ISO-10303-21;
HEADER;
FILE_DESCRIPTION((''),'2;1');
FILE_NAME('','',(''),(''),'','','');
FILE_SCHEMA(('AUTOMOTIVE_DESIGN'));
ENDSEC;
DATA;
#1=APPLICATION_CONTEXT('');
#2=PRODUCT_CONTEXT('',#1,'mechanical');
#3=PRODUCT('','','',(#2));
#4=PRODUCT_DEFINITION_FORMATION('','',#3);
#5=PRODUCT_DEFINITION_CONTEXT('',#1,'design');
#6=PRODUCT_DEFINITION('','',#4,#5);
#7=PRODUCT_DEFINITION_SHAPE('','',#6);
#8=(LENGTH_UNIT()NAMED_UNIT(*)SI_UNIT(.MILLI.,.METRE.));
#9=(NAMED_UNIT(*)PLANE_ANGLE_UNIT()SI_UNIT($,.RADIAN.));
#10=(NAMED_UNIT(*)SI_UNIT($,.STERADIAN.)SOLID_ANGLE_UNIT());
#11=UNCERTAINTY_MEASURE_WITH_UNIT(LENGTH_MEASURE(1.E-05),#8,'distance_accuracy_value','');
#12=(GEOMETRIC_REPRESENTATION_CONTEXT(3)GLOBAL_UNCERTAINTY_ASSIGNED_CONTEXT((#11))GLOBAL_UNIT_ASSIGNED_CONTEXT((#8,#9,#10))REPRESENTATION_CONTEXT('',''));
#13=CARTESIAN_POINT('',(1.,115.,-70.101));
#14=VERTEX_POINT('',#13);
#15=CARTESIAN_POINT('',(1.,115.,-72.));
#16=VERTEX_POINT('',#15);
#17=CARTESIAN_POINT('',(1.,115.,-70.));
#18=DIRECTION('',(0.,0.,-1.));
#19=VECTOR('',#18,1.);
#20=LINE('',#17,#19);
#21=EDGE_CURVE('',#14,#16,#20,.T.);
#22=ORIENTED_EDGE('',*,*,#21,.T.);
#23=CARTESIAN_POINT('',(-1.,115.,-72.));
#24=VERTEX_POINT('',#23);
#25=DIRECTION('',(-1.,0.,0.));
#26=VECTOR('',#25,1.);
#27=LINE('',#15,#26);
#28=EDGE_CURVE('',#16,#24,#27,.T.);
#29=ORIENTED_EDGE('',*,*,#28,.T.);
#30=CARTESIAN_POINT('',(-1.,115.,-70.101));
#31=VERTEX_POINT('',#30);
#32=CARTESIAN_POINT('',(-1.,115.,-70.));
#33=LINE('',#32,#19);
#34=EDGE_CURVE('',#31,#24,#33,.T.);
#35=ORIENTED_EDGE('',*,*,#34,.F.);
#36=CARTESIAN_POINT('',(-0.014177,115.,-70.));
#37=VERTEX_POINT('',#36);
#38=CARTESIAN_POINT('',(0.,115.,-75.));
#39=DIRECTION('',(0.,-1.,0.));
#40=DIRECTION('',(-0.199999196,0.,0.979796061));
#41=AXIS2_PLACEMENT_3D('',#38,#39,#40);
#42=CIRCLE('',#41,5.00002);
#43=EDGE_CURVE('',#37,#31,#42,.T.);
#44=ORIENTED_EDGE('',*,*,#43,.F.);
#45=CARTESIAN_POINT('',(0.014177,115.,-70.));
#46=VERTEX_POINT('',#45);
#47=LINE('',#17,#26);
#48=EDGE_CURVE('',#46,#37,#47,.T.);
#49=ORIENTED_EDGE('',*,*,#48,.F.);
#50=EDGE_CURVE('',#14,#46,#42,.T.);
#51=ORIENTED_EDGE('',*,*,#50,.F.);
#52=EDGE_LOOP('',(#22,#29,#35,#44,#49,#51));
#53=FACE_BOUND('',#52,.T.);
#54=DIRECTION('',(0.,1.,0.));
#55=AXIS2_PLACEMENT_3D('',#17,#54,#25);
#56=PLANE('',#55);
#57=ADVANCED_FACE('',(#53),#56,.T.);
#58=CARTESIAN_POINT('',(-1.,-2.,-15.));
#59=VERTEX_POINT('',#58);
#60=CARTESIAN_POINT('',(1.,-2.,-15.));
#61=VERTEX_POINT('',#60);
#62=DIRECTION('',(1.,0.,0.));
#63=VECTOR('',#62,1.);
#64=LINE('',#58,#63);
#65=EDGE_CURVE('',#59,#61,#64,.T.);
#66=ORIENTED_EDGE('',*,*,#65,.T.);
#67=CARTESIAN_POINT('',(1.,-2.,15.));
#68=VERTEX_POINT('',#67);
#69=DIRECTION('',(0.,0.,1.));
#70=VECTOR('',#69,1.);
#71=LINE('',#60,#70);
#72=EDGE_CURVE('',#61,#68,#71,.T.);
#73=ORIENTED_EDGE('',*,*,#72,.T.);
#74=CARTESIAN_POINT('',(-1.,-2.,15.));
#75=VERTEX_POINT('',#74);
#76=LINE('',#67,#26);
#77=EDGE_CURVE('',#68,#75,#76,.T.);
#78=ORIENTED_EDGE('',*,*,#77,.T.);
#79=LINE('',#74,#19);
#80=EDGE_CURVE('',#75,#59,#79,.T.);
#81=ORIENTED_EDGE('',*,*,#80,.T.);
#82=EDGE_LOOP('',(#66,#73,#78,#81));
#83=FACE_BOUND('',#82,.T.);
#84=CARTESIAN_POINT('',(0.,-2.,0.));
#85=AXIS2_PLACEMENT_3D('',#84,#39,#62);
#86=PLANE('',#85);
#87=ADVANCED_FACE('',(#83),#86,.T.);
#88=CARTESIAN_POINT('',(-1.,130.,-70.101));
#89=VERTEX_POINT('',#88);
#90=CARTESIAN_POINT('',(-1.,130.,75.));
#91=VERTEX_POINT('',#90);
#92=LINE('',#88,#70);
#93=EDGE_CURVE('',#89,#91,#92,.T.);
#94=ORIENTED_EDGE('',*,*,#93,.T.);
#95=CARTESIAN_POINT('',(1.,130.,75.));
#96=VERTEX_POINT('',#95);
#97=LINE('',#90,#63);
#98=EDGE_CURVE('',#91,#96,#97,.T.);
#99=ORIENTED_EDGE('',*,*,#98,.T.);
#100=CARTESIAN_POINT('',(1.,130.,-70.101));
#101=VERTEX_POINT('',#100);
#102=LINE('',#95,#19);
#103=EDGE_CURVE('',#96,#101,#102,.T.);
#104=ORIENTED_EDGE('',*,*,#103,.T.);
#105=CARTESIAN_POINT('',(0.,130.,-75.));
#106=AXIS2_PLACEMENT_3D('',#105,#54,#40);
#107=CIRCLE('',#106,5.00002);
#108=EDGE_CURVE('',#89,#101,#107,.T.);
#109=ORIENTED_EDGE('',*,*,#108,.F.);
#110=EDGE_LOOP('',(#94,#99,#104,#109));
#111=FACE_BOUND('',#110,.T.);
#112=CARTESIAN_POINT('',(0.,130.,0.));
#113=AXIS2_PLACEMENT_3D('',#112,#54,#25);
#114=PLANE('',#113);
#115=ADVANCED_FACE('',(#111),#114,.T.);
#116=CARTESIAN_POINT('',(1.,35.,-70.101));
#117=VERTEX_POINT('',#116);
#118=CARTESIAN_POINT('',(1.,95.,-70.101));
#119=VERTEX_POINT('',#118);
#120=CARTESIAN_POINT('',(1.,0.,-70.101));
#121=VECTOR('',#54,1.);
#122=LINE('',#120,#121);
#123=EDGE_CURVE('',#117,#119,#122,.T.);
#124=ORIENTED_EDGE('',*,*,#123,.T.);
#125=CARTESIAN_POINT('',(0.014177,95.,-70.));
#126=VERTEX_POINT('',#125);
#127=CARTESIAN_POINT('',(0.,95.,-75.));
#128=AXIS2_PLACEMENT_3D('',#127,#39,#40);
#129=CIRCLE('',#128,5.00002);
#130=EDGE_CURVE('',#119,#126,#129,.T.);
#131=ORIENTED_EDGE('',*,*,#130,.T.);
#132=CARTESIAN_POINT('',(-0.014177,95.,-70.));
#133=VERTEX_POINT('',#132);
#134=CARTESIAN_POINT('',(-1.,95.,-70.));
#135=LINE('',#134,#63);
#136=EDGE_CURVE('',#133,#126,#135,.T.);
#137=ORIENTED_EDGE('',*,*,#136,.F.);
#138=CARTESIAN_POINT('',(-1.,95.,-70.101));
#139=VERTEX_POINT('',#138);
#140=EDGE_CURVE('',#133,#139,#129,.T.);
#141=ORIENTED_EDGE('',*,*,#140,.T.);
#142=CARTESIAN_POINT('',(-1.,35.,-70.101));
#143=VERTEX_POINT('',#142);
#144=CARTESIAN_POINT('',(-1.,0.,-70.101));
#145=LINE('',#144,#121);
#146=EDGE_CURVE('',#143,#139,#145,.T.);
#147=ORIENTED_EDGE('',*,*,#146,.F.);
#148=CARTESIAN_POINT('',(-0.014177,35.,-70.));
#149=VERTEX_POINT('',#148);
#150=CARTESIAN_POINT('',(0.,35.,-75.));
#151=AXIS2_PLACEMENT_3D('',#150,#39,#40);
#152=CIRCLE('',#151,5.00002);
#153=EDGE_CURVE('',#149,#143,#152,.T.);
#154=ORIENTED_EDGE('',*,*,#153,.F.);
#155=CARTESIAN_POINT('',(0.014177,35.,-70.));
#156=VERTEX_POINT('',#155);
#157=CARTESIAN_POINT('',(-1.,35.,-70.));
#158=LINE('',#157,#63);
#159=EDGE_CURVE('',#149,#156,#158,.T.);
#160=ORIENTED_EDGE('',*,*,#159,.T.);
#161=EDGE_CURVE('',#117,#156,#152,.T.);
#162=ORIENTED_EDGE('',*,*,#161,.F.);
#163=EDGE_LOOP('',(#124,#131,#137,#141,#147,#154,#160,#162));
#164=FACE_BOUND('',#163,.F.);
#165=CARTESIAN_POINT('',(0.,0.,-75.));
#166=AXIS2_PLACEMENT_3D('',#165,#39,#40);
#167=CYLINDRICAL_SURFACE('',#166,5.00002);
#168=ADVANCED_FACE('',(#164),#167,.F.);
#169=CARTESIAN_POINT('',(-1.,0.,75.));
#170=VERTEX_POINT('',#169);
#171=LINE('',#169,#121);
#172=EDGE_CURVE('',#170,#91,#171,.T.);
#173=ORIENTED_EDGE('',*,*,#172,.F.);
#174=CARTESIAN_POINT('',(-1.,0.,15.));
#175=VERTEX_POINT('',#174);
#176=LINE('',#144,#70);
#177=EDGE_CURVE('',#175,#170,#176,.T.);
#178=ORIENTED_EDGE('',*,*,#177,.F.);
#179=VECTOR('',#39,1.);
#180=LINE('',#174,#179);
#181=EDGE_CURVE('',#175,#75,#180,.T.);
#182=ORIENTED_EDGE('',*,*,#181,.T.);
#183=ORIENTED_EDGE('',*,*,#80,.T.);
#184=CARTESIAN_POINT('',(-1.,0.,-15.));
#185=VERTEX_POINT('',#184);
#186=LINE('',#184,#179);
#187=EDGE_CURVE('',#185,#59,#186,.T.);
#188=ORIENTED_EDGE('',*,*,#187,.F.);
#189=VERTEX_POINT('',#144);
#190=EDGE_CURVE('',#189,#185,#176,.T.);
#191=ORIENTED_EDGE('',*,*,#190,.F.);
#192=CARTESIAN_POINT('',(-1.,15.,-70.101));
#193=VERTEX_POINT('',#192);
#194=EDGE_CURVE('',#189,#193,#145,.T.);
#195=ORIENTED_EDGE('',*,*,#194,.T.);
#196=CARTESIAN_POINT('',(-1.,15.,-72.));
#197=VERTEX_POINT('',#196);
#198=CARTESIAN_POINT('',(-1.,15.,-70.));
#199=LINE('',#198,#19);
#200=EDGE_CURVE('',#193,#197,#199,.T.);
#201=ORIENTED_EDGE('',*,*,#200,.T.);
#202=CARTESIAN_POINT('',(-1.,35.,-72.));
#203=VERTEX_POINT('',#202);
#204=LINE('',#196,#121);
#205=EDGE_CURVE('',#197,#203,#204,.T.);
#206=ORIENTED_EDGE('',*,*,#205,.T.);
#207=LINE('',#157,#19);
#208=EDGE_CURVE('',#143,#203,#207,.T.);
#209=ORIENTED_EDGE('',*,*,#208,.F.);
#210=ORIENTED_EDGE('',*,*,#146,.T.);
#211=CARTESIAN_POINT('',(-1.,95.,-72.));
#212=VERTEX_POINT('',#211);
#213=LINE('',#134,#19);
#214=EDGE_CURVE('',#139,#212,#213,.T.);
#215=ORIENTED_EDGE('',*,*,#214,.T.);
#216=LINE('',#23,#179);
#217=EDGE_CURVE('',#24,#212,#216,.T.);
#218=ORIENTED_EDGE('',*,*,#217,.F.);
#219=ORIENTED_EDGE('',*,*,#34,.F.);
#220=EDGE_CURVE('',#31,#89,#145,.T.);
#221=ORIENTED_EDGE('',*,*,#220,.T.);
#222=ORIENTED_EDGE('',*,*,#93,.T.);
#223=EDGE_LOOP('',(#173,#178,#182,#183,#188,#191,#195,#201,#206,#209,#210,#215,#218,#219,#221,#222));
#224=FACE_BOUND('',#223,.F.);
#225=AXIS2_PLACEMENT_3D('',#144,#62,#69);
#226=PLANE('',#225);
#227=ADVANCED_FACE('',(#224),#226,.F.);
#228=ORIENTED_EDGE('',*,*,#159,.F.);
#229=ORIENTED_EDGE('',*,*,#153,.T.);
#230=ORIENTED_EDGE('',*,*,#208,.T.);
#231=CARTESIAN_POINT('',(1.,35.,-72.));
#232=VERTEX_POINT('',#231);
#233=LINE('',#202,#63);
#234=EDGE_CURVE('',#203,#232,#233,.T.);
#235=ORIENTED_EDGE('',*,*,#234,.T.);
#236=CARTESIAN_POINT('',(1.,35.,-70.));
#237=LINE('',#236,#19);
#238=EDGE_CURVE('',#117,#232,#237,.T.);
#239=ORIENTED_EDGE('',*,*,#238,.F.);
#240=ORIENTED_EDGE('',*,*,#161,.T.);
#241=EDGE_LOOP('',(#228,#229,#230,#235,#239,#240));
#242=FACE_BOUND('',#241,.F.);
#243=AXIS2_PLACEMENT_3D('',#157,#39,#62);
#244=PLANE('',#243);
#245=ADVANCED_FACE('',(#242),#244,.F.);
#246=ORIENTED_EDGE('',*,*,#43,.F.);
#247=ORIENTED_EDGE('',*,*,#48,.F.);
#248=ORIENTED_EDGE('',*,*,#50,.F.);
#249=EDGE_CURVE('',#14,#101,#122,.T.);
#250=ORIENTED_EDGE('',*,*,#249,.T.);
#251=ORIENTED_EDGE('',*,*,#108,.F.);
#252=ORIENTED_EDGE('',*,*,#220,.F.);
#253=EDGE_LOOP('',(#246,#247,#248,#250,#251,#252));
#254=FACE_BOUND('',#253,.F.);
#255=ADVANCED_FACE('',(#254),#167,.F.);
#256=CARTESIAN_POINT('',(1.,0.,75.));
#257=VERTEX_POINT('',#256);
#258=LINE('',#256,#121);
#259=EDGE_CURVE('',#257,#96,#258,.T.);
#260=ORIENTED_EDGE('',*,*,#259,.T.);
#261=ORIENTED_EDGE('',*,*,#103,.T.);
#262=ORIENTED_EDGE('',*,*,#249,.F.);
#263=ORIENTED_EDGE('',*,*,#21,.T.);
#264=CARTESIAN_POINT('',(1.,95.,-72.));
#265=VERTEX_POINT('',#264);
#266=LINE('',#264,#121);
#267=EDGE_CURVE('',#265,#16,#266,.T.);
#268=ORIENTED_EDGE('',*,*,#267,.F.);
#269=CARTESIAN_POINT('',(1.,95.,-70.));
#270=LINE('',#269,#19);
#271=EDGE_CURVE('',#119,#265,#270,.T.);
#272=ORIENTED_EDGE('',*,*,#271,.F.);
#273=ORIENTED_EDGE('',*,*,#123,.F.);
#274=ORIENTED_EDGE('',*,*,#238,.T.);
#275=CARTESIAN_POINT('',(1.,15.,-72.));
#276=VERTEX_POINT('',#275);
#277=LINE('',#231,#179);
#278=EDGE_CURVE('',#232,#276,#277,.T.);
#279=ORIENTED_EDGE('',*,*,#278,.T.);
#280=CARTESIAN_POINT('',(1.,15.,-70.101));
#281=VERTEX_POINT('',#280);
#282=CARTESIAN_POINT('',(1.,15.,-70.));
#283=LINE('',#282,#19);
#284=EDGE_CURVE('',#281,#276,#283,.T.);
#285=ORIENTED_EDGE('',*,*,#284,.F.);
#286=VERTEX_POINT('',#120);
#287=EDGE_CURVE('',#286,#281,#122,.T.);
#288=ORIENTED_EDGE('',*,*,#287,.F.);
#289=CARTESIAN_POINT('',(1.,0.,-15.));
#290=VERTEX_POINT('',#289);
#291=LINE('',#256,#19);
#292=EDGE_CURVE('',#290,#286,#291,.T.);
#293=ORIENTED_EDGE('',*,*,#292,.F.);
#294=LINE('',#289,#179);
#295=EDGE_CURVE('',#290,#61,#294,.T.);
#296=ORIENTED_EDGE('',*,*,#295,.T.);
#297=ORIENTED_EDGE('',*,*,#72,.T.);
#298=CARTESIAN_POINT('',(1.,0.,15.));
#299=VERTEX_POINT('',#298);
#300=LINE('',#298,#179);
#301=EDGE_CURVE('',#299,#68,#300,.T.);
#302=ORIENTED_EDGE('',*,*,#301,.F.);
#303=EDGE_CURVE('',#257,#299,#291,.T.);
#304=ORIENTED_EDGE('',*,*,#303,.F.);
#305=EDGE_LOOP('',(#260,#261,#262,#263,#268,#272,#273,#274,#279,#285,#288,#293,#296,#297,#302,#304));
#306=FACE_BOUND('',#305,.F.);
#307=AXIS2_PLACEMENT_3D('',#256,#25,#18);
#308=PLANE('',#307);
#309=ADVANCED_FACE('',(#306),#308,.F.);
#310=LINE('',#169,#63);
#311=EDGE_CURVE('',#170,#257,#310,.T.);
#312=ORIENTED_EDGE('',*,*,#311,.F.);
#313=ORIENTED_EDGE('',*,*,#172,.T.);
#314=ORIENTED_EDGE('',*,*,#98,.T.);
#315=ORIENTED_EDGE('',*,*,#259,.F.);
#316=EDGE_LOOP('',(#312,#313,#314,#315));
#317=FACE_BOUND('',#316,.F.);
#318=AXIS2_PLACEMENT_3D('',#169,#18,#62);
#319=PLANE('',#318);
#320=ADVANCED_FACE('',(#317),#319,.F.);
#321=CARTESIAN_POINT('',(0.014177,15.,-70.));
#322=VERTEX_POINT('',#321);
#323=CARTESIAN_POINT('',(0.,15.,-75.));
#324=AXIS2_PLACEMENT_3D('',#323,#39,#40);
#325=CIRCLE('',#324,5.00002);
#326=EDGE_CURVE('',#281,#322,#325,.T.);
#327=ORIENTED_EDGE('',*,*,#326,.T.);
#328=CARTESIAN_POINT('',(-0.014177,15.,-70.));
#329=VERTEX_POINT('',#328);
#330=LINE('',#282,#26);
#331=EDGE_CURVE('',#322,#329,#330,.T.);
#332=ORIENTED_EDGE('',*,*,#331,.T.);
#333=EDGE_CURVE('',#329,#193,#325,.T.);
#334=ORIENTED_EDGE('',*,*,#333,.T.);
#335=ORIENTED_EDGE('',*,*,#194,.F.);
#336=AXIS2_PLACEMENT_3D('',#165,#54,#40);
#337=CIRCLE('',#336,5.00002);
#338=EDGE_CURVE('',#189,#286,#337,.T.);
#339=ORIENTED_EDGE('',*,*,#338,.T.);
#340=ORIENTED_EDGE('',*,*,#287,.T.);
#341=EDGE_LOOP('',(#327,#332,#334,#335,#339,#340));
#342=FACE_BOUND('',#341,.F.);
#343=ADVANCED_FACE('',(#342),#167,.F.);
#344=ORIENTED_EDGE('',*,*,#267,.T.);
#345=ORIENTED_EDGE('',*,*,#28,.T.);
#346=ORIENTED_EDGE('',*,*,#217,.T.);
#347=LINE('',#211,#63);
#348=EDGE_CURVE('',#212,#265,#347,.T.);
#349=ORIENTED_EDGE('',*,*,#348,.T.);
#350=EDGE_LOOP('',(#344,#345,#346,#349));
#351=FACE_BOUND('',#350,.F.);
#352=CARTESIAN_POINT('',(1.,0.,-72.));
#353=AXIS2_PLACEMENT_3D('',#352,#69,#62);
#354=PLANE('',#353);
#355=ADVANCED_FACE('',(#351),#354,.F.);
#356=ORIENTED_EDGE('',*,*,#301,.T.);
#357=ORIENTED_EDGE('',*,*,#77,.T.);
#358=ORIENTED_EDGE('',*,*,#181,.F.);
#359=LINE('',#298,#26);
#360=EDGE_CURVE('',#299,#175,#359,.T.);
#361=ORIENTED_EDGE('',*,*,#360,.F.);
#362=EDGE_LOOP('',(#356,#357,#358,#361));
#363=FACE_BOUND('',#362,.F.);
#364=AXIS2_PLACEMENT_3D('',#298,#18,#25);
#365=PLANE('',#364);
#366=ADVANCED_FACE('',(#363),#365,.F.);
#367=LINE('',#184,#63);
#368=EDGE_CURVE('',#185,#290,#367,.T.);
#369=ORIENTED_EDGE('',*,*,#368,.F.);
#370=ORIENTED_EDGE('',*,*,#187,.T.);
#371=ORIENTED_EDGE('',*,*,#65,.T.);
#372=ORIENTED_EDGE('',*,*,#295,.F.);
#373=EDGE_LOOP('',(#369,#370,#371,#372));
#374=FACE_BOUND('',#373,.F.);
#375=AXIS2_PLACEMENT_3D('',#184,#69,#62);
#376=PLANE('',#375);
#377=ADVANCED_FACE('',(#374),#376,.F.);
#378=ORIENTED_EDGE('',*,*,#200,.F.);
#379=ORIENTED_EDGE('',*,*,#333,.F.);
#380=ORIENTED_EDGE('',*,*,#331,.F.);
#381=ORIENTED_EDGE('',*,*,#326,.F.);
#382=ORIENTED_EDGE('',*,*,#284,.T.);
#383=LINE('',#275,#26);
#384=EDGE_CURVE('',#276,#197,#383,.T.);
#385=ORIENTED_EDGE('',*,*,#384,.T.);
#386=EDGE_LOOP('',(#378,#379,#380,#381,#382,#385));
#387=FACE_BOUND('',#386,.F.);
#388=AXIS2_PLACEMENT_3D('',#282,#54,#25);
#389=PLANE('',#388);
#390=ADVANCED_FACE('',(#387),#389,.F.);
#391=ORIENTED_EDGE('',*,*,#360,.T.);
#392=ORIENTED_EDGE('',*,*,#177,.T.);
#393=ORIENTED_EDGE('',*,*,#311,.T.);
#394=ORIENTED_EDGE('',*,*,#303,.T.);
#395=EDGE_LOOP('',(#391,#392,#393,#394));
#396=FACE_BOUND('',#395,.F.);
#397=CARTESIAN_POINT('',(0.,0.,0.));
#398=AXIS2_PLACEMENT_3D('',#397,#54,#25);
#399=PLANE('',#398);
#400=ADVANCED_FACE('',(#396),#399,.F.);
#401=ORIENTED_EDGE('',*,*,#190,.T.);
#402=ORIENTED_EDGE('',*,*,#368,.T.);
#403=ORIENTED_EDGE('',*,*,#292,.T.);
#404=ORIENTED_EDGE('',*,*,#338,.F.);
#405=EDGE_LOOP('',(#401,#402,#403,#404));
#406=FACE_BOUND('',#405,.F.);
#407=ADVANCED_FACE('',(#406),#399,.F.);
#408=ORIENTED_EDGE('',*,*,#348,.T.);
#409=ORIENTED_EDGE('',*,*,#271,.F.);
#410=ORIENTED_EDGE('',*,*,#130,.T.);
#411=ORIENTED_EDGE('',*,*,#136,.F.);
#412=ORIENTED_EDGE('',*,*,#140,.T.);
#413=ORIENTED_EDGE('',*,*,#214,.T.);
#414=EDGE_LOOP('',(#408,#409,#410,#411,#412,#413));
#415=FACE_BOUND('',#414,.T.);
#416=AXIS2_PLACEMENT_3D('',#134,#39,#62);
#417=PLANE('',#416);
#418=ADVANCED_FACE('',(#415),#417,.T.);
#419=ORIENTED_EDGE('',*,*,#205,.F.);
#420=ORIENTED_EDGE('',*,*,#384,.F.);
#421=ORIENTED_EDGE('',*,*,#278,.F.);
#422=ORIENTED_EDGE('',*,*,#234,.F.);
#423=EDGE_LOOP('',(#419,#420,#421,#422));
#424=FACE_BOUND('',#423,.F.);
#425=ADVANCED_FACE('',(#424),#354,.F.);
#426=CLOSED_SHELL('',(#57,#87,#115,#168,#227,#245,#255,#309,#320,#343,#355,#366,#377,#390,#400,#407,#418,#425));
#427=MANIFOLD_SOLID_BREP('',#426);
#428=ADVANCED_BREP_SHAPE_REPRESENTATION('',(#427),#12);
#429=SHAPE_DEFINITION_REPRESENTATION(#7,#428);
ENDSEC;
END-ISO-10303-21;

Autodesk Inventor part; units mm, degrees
ref_plane "YZ Plane" through (0, 0, 0) normal (1, 0, 0) x (0, 1, 0)
sketch "Sketch1" plane through (0, 0, 0) normal (0, 1, 0) x (-1, 0, 0)
  line L0 (1, 75) -> (-1, 75)
  line L1 (-1, 75) -> (-1, -70.101)
  line L2 (-1, -75) -> (0, -75) construction
  line L3 (1, -75) -> (1, -70.101) construction
  line L4 (0, 75) -> (0, -75) construction
  arc A0 (1, -70.101) -> (-1, -70.101) centre (0, -75) ccw
  arc A1 (-1, -70.101) -> (1, -70.101) centre (0, -75) ccw construction
  line L5 (1, -70.101) -> (1, 75)
  line L6 (0, -75) -> (1, -75) construction
  line L7 (-1, -70.101) -> (-1, -75) construction
  point P0 (0, 0)
  point P1 (0, 0)
  dimension "d0" = 2
  dimension "d1" = 150
  dimension "d18" = 10
extrude "Extrusion1" add sketch "Sketch1" along normal blind 130
ref_plane "Work Plane2" through (0, 0, 0) normal (0, -1, 0) x (1, 0, 0)
sketch "Sketch2" plane through (0, 0, 0) normal (0, -1, 0) x (1, 0, 0)
  line L0 (1, 15) -> (-1, 15)
  line L1 (-1, 15) -> (-1, -15)
  line L2 (-1, -15) -> (1, -15)
  line L3 (1, -15) -> (1, 15)
  line L4 (0, 15) -> (0, -15) construction
  point P0 (0, 0)
  point P1 (0, 0)
  dimension "d5" = 2
  dimension "d6" = 30
extrude "Extrusion2" add sketch "Sketch2" along normal blind 2
ref_plane "Work Plane4" through (1, 0, -70) normal (0, 0, 1) x (1, 0, 0)
sketch "Sketch4" plane through (1, 0, -70) normal (0, 0, 1) x (1, 0, 0)
  line L0 (0, 115) -> (-2, 115)
  line L1 (-2, 115) -> (-2, 95)
  line L2 (-2, 95) -> (0, 95)
  line L3 (0, 95) -> (0, 115)
  line L4 (-1, 115) -> (-1, 95) construction
  line L5 (-1, 0) -> (-1, 130) construction
  line L6 (-2, 130) -> (0, 130) construction
  line L7 (-2, 35) -> (0, 35)
  line L8 (0, 35) -> (0, 15)
  line L9 (0, 15) -> (-2, 15)
  line L10 (-2, 15) -> (-2, 35)
  line L11 (-1, 35) -> (-1, 15) construction
  line L12 (-2, 0) -> (0, 0) construction
  dimension "d20" = 2
  dimension "d21" = 20
  dimension "d22" = 15
  dimension "d23" = 2
  dimension "d24" = 20
  dimension "d25" = 15
extrude "Extrusion4" add sketch "Sketch4" against normal blind 2
properties part number "sidePlate" material "Aluminum 6061"
